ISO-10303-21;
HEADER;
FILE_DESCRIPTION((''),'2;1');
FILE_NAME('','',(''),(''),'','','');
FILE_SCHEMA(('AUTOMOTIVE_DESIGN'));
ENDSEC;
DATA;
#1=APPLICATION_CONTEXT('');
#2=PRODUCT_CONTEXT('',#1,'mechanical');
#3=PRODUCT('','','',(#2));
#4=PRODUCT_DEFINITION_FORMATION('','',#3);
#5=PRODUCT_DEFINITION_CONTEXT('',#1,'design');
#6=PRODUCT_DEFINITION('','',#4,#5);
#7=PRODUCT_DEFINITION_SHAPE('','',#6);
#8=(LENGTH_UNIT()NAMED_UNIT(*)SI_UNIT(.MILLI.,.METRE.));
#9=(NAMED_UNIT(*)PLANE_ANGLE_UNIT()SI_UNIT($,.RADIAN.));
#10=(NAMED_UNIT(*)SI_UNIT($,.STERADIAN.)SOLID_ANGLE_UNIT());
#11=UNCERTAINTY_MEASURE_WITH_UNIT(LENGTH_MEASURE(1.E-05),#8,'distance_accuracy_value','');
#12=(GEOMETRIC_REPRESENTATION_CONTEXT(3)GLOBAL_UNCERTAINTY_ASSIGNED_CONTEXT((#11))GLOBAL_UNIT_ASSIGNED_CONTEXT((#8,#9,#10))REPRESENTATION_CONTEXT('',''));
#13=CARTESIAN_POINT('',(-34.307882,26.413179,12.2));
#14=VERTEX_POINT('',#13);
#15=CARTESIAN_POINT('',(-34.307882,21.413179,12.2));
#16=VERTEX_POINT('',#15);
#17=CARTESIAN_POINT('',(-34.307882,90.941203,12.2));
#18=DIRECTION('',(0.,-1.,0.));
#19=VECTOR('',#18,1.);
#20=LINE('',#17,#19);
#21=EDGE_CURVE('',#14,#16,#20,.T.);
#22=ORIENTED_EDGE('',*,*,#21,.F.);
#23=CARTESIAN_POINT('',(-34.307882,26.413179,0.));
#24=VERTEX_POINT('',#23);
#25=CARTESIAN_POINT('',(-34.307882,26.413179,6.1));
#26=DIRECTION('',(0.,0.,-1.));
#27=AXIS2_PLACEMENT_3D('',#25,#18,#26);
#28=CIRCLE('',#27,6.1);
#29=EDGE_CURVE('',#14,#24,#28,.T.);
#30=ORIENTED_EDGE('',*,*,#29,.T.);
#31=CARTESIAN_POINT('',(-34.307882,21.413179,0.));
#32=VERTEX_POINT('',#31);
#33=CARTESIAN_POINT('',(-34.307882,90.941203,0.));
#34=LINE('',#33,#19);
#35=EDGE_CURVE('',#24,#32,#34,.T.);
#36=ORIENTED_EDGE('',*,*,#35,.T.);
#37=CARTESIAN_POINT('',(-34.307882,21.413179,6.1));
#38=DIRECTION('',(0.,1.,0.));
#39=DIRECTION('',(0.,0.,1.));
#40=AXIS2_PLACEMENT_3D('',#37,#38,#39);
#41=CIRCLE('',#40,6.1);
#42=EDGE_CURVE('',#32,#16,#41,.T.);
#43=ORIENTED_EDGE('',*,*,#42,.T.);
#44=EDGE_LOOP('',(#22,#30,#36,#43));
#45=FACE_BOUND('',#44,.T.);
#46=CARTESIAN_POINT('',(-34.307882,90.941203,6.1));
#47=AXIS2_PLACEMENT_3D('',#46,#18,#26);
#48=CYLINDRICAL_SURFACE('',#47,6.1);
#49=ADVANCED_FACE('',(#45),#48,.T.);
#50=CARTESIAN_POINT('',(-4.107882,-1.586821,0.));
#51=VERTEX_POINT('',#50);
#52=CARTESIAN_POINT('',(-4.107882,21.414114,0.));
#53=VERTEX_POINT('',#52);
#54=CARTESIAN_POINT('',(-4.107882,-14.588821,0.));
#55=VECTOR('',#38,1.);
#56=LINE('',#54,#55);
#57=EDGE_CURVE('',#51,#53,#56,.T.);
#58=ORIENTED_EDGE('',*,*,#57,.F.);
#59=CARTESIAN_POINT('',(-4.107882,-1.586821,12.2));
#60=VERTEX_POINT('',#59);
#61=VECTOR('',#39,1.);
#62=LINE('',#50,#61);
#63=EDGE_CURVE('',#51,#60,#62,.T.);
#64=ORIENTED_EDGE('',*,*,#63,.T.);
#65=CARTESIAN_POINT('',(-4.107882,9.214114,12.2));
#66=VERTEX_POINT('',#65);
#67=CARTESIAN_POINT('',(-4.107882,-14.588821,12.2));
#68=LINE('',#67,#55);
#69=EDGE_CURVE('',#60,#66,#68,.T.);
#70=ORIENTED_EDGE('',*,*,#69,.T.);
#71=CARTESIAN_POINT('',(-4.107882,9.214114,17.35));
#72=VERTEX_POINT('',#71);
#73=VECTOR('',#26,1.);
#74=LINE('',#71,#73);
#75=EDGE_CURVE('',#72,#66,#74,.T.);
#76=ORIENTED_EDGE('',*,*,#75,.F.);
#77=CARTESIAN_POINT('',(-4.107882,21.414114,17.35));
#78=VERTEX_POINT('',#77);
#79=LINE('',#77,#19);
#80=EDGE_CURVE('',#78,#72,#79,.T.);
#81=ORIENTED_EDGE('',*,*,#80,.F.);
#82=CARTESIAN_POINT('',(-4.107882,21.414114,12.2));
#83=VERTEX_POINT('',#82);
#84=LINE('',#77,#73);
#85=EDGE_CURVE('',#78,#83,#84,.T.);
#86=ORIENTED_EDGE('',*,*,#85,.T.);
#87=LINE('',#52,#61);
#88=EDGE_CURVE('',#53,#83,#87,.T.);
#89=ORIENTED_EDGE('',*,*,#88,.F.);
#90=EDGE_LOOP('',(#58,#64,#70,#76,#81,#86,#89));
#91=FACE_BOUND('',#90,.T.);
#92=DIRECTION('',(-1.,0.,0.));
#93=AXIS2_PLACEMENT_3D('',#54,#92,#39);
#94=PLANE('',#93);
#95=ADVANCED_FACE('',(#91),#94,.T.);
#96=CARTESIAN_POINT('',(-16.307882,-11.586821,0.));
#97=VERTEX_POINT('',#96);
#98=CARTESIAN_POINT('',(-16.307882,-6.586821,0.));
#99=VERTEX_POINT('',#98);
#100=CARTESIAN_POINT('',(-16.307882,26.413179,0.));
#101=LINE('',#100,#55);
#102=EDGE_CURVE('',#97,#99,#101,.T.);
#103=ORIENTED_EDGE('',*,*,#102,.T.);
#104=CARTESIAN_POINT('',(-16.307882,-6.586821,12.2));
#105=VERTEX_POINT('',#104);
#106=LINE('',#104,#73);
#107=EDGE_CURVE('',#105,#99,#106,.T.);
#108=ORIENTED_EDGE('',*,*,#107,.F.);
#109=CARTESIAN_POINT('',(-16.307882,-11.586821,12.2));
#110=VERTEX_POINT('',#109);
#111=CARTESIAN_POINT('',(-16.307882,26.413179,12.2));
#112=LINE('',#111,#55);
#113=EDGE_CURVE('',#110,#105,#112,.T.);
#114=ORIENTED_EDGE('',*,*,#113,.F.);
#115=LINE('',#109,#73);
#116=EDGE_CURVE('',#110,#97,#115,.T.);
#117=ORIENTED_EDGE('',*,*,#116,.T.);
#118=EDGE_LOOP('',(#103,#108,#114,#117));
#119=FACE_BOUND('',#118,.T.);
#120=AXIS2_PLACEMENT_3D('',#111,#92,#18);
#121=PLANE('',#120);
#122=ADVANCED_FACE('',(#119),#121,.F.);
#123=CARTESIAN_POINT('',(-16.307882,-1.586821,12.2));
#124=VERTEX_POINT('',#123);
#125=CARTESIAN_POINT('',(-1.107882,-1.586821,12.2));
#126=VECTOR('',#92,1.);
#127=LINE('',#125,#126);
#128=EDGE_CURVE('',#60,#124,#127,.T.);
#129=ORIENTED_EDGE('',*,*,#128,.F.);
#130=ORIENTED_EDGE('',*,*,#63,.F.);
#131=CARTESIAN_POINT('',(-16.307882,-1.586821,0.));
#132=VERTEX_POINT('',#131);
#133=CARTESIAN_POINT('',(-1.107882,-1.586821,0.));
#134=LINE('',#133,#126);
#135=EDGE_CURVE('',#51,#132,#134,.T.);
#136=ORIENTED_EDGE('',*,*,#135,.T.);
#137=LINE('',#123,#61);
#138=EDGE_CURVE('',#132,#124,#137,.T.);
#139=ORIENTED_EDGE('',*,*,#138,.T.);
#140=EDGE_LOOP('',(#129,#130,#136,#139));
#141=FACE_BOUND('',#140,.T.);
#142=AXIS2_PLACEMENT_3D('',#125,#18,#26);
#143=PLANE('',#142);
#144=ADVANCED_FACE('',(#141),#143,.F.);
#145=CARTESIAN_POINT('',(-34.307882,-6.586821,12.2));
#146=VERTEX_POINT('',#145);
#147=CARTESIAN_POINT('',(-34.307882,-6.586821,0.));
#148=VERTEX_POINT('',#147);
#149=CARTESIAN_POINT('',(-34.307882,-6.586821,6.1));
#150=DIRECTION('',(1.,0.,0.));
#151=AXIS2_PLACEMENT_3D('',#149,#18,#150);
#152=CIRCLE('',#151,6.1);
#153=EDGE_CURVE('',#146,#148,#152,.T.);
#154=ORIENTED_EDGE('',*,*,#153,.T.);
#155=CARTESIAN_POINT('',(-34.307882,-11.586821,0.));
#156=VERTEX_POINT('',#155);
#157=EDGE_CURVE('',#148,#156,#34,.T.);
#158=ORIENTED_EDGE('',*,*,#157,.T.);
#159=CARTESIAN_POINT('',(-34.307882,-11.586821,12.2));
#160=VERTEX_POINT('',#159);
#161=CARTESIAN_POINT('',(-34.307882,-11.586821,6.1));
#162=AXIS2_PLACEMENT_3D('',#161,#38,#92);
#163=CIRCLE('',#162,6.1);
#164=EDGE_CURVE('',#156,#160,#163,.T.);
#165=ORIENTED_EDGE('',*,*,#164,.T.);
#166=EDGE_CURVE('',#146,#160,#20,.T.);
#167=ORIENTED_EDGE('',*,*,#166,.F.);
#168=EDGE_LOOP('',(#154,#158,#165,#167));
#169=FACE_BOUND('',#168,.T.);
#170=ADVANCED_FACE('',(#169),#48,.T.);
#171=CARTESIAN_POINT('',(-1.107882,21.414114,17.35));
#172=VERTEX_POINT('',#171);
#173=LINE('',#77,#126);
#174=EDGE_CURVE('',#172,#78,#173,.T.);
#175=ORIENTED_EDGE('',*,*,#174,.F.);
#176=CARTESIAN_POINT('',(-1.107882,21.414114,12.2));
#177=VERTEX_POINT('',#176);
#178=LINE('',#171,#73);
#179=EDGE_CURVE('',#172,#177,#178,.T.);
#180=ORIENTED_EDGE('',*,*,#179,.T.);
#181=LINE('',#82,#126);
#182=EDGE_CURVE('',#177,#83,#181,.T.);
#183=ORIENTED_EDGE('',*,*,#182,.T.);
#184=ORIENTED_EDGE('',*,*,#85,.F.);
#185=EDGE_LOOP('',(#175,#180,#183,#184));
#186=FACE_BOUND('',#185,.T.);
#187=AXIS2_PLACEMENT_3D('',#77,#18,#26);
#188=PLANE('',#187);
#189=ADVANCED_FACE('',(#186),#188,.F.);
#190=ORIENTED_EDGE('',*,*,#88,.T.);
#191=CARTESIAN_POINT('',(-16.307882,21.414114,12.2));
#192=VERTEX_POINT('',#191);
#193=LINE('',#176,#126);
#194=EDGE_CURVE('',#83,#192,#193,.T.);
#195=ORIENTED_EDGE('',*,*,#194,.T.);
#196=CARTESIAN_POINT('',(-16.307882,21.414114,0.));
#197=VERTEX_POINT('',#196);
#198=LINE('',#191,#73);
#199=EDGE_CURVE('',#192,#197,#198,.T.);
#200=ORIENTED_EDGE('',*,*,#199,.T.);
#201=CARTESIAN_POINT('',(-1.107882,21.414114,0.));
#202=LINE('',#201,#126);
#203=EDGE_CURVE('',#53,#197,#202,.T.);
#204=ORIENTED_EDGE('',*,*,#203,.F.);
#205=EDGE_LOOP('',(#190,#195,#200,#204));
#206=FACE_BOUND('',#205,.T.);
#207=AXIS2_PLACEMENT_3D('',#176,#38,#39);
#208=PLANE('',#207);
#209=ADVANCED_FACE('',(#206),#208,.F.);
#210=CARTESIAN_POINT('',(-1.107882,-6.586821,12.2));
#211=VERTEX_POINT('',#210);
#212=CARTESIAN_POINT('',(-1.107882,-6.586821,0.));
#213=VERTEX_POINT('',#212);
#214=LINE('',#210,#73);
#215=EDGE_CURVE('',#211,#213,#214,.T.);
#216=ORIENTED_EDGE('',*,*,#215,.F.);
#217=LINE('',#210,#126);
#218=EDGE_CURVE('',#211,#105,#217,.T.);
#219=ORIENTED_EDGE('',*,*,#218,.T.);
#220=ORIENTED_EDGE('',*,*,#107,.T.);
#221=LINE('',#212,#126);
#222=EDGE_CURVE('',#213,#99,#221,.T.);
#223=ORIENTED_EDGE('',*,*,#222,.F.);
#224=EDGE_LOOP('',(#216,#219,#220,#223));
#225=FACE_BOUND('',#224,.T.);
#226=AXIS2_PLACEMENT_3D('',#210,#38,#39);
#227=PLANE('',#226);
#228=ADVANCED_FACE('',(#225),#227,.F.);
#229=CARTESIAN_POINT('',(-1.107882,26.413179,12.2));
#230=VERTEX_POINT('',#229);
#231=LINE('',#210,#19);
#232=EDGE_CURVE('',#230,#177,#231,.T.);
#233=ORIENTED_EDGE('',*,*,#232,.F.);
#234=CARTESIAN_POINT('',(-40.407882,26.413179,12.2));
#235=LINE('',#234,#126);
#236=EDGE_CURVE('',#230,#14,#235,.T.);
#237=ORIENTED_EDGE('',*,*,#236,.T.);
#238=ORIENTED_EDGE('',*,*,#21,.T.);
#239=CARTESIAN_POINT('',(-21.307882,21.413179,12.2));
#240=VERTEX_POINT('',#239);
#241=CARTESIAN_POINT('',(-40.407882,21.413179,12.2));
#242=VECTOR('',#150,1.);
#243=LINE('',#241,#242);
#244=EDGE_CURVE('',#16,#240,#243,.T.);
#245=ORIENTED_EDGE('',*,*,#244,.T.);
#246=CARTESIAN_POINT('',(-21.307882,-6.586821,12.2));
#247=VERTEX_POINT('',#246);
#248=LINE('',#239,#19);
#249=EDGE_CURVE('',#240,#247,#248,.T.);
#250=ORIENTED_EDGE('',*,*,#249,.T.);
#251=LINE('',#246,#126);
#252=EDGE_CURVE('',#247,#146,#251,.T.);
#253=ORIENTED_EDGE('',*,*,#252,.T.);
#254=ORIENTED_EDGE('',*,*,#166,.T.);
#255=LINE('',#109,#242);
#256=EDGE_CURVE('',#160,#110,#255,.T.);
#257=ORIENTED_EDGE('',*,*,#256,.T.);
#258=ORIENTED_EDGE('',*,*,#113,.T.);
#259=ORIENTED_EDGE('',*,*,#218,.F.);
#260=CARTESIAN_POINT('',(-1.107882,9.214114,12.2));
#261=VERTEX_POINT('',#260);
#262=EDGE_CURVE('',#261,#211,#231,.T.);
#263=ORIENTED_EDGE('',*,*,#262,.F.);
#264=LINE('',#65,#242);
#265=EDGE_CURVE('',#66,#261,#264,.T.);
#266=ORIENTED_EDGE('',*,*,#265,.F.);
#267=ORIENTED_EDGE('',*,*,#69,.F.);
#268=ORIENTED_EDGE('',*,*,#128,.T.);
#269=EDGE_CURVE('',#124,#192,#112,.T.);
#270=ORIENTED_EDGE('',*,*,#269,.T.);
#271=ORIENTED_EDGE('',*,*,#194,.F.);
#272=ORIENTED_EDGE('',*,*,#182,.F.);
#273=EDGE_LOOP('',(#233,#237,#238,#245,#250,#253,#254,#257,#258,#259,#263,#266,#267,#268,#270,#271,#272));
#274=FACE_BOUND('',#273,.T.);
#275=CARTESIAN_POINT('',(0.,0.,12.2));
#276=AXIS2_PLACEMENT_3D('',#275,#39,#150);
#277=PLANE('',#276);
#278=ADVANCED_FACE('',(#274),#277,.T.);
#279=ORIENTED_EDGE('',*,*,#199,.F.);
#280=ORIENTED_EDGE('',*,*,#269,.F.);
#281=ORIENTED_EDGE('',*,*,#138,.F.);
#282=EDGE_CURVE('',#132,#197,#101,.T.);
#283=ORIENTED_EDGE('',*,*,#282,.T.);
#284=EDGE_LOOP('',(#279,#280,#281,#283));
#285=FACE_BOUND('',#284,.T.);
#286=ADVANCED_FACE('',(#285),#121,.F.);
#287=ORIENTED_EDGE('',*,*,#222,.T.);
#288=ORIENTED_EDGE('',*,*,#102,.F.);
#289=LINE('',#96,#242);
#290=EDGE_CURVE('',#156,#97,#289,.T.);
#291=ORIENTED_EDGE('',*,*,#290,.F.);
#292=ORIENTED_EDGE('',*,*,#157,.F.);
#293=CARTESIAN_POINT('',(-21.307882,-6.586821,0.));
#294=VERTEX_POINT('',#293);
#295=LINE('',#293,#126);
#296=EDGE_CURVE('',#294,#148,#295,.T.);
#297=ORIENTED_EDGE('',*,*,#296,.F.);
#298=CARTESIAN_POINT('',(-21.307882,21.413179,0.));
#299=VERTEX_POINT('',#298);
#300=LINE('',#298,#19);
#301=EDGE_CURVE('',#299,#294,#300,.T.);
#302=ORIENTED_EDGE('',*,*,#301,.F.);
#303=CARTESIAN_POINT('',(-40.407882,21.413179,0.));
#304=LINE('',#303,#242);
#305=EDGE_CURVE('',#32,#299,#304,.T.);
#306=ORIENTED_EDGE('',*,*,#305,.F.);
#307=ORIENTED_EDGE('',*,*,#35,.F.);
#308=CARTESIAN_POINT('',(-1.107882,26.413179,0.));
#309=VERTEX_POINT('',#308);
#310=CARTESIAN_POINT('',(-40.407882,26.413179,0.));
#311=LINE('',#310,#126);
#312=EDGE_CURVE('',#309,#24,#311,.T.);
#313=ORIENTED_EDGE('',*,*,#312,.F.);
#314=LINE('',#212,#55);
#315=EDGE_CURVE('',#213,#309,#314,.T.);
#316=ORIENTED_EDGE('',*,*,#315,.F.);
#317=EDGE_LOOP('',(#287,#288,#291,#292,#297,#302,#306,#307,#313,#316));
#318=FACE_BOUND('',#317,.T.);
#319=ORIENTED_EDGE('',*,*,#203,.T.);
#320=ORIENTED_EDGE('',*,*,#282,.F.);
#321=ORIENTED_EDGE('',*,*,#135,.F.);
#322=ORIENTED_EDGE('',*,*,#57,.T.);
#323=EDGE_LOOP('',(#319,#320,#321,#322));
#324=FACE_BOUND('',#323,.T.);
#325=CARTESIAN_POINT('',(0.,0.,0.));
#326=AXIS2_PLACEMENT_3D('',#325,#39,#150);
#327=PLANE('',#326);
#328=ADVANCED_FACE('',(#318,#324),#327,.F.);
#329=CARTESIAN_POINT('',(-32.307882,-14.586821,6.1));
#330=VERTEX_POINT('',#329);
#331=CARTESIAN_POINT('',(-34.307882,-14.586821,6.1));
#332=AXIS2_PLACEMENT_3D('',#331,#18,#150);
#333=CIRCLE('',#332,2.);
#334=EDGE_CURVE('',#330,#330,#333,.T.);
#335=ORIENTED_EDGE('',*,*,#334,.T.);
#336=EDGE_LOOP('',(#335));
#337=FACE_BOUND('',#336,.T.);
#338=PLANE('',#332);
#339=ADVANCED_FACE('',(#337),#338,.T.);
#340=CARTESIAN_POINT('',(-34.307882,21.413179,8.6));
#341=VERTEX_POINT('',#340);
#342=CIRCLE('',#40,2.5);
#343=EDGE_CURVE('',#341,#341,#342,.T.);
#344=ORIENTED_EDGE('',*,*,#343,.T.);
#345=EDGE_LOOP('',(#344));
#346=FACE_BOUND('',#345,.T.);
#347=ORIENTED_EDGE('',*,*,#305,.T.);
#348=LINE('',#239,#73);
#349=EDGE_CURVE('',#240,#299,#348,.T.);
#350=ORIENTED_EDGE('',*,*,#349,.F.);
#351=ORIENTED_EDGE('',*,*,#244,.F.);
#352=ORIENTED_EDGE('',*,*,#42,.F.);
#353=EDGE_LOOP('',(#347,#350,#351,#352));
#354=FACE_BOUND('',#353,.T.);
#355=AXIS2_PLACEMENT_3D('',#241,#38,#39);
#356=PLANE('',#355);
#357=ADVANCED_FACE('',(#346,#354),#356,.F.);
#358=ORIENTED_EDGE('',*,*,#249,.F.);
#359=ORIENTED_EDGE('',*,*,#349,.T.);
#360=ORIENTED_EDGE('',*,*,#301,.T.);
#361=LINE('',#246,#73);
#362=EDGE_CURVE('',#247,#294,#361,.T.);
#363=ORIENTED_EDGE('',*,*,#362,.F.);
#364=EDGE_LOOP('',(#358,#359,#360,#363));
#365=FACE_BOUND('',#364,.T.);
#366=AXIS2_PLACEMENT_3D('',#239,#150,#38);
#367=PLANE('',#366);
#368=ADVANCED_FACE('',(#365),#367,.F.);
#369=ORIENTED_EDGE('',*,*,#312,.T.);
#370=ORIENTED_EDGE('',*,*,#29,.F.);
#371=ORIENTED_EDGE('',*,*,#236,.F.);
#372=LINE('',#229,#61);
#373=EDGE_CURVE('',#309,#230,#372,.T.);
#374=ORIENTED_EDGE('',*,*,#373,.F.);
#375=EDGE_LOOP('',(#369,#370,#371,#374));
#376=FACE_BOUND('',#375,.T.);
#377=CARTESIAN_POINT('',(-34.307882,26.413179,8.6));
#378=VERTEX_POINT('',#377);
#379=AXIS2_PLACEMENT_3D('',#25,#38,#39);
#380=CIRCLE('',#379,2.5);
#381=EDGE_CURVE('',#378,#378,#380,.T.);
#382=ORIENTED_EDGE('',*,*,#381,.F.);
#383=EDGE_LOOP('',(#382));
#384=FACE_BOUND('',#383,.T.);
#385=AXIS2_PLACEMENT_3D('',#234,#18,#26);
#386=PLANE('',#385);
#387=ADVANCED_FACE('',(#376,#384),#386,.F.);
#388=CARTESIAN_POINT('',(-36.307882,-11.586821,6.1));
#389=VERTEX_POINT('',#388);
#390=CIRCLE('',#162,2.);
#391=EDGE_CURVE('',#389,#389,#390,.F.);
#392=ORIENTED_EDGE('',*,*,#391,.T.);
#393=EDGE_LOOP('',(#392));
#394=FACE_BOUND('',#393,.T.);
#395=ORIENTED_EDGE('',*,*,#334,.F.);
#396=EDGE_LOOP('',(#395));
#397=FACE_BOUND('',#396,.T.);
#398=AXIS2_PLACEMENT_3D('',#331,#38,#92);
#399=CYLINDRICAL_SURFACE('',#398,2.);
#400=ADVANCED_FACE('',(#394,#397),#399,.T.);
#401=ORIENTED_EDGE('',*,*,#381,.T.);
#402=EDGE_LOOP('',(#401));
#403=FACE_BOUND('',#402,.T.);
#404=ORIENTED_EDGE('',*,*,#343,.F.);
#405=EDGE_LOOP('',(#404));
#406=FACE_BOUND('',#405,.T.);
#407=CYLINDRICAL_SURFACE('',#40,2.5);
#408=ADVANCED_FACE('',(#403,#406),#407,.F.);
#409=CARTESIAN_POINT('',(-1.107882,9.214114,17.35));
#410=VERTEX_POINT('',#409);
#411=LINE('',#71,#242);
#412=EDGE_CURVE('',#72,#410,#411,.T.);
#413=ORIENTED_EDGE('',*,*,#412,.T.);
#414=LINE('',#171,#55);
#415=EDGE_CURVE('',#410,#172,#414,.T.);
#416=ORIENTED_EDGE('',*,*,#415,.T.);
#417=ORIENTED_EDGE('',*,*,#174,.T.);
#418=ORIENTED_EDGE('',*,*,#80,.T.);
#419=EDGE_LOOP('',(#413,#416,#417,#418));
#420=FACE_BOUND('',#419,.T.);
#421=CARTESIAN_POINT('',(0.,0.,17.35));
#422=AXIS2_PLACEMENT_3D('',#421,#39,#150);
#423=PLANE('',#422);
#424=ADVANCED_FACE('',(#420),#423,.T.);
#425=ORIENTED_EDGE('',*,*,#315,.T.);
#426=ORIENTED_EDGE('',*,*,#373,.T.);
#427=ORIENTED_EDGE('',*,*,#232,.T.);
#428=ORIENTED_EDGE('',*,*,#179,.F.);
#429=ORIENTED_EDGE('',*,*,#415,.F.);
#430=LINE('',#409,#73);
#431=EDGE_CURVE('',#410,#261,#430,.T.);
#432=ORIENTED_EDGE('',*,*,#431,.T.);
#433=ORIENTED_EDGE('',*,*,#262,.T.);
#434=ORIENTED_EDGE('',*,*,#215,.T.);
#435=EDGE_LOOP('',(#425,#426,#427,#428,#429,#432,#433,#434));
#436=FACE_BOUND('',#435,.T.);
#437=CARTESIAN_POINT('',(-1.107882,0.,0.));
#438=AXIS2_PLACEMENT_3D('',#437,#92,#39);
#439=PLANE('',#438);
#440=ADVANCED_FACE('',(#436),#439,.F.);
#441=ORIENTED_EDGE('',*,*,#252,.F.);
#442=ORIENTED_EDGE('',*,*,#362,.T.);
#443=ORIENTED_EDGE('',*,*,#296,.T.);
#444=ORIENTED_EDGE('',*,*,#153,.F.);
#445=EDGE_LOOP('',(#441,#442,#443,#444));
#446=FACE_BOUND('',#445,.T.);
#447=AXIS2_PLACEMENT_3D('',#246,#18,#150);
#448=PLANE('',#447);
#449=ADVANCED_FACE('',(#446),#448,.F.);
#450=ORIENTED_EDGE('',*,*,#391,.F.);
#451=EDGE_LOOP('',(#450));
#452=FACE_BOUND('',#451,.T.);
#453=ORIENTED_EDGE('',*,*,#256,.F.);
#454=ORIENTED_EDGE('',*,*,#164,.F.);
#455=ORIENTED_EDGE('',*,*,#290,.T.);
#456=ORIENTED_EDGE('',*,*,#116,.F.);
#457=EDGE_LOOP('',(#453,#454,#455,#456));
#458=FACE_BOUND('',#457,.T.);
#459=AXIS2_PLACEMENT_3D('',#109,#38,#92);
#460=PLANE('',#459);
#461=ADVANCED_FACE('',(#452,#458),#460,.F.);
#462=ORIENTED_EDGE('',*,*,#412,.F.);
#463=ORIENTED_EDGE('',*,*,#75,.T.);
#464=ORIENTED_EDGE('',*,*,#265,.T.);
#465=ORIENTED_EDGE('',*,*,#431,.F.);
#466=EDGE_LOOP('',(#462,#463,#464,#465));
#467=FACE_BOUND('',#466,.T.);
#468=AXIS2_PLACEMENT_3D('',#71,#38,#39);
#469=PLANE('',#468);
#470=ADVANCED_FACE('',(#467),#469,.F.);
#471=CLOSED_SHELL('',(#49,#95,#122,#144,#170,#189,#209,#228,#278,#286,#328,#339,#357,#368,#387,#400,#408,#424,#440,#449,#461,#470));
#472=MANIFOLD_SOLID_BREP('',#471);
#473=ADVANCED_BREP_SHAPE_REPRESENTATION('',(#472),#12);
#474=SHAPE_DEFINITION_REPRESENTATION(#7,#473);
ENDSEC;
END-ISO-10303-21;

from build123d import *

# Parameters (mm, degrees)
BOSS_EXTRUDE1_DEPTH = 12.2
SKETCH4_R           = 2.5
CUT_EXTRUDE1_DEPTH  = 5
CUT_EXTRUDE2_START  = -38
CUT_EXTRUDE2_DEPTH  = 38
SKETCH6_R           = 2
BOSS_EXTRUDE2_DEPTH = 3
SKETCH7_W           = 12.2
SKETCH7_H           = 4.999065242
SKETCH7_H_2         = 5
BOSS_EXTRUDE3_DEPTH = 15.2
BOSS_EXTRUDE5_REACH = 57.477
SKETCH9_W           = 3
SKETCH9_H           = 12.2
SKETCH10_W          = 3
SKETCH10_H          = 12.2
BOSS_EXTRUDE6_DEPTH = 5.15


# Read off the part's stored shape, not the designer's step: Cut-Extrude2
with BuildPart() as part:
    # Sketch3 → Boss-Extrude1 (new body)
    with BuildSketch(Plane.XY):
        Polygon((-40.407881927, 21.413178882), (-21.307881927, 21.413178882), (-21.307881927, -6.586821118), (-40.407881927, -6.586821118), (-40.407881927, -11.586821118), (-16.307881927, -11.586821118), (-16.307881927, 26.413178882), (-40.407881927, 26.413178882), align=None)
    extrude(amount=BOSS_EXTRUDE1_DEPTH)

    # Sketch4 → Cut-Extrude1 (cut)
    with BuildSketch(Plane(origin=(0, 26.413178882, 0), x_dir=(1, 0, 0), z_dir=(0, 1, 0))):
        with Locations(Location((-34.307881927, -6.1, 0), (0, 0, 270))):
            Circle(SKETCH4_R)
    extrude(amount=-CUT_EXTRUDE1_DEPTH, mode=Mode.SUBTRACT)

    # Cut-Extrude2 outline → Cut-Extrude2 (cut)
    with BuildSketch(Plane(origin=(0, 26.413178882, 0), x_dir=(1, 0, 0), z_dir=(0, 1, 0)).offset(CUT_EXTRUDE2_START)):
        with BuildLine():
            Line((-40.407881927, -12.2), (-34.307881927, -12.2))
            ThreePointArc((-34.307881927, -12.2), (-38.621233292, -10.413351365), (-40.407881927, -6.1))
            Line((-40.407881927, -6.1), (-40.407881927, -12.2))
        make_face()
        with BuildLine():
            Line((-40.407881927, 0), (-40.407881927, -6.1))
            ThreePointArc((-40.407881927, -6.1), (-38.621233292, -1.786648635), (-34.307881927, 0))
            Line((-34.307881927, 0), (-40.407881927, 0))
        make_face()
    extrude(amount=CUT_EXTRUDE2_DEPTH, mode=Mode.SUBTRACT)

    # Sketch6 → Boss-Extrude2 (add)
    with BuildSketch(Plane.XZ.offset(11.586821118)):
        with Locations(Location((-34.307881927, 6.1, 0), (0, 0, 180))):
            Circle(SKETCH6_R)
    extrude(amount=BOSS_EXTRUDE2_DEPTH)

    # Sketch7 → Boss-Extrude3 (add)
    with BuildSketch(Plane(origin=(-16.307881927, 0, 0), x_dir=(0, 0, -1), z_dir=(1, 0, 0))):
        with Locations((-6.1, 23.913646261)):
            Rectangle(SKETCH7_W, SKETCH7_H)
        with Locations((-6.1, -4.086821118)):
            Rectangle(SKETCH7_W, SKETCH7_H_2)
    extrude(amount=BOSS_EXTRUDE3_DEPTH)

    # Sketch9 → Boss-Extrude5 (add, up to next)
    with BuildSketch(Plane.XZ.offset(-21.41411364), mode=Mode.PRIVATE) as boss_extrude5_sk1:
        with Locations((-2.607881927, 6.1)):
            Rectangle(SKETCH9_W, SKETCH9_H)
    boss_extrude5_tool1 = extrude(boss_extrude5_sk1.sketch, amount=BOSS_EXTRUDE5_REACH, mode=Mode.PRIVATE) - part.part
    add(boss_extrude5_tool1.solids().sort_by_distance((-2.607882, 21.414114, 6.1))[0])

    # Sketch10 → Boss-Extrude6 (add)
    with BuildSketch(Plane.XY.offset(12.2)):
        with Locations((-2.607881927, 15.31411364)):
            Rectangle(SKETCH10_W, SKETCH10_H)
    extrude(amount=BOSS_EXTRUDE6_DEPTH)


solid = part.part
